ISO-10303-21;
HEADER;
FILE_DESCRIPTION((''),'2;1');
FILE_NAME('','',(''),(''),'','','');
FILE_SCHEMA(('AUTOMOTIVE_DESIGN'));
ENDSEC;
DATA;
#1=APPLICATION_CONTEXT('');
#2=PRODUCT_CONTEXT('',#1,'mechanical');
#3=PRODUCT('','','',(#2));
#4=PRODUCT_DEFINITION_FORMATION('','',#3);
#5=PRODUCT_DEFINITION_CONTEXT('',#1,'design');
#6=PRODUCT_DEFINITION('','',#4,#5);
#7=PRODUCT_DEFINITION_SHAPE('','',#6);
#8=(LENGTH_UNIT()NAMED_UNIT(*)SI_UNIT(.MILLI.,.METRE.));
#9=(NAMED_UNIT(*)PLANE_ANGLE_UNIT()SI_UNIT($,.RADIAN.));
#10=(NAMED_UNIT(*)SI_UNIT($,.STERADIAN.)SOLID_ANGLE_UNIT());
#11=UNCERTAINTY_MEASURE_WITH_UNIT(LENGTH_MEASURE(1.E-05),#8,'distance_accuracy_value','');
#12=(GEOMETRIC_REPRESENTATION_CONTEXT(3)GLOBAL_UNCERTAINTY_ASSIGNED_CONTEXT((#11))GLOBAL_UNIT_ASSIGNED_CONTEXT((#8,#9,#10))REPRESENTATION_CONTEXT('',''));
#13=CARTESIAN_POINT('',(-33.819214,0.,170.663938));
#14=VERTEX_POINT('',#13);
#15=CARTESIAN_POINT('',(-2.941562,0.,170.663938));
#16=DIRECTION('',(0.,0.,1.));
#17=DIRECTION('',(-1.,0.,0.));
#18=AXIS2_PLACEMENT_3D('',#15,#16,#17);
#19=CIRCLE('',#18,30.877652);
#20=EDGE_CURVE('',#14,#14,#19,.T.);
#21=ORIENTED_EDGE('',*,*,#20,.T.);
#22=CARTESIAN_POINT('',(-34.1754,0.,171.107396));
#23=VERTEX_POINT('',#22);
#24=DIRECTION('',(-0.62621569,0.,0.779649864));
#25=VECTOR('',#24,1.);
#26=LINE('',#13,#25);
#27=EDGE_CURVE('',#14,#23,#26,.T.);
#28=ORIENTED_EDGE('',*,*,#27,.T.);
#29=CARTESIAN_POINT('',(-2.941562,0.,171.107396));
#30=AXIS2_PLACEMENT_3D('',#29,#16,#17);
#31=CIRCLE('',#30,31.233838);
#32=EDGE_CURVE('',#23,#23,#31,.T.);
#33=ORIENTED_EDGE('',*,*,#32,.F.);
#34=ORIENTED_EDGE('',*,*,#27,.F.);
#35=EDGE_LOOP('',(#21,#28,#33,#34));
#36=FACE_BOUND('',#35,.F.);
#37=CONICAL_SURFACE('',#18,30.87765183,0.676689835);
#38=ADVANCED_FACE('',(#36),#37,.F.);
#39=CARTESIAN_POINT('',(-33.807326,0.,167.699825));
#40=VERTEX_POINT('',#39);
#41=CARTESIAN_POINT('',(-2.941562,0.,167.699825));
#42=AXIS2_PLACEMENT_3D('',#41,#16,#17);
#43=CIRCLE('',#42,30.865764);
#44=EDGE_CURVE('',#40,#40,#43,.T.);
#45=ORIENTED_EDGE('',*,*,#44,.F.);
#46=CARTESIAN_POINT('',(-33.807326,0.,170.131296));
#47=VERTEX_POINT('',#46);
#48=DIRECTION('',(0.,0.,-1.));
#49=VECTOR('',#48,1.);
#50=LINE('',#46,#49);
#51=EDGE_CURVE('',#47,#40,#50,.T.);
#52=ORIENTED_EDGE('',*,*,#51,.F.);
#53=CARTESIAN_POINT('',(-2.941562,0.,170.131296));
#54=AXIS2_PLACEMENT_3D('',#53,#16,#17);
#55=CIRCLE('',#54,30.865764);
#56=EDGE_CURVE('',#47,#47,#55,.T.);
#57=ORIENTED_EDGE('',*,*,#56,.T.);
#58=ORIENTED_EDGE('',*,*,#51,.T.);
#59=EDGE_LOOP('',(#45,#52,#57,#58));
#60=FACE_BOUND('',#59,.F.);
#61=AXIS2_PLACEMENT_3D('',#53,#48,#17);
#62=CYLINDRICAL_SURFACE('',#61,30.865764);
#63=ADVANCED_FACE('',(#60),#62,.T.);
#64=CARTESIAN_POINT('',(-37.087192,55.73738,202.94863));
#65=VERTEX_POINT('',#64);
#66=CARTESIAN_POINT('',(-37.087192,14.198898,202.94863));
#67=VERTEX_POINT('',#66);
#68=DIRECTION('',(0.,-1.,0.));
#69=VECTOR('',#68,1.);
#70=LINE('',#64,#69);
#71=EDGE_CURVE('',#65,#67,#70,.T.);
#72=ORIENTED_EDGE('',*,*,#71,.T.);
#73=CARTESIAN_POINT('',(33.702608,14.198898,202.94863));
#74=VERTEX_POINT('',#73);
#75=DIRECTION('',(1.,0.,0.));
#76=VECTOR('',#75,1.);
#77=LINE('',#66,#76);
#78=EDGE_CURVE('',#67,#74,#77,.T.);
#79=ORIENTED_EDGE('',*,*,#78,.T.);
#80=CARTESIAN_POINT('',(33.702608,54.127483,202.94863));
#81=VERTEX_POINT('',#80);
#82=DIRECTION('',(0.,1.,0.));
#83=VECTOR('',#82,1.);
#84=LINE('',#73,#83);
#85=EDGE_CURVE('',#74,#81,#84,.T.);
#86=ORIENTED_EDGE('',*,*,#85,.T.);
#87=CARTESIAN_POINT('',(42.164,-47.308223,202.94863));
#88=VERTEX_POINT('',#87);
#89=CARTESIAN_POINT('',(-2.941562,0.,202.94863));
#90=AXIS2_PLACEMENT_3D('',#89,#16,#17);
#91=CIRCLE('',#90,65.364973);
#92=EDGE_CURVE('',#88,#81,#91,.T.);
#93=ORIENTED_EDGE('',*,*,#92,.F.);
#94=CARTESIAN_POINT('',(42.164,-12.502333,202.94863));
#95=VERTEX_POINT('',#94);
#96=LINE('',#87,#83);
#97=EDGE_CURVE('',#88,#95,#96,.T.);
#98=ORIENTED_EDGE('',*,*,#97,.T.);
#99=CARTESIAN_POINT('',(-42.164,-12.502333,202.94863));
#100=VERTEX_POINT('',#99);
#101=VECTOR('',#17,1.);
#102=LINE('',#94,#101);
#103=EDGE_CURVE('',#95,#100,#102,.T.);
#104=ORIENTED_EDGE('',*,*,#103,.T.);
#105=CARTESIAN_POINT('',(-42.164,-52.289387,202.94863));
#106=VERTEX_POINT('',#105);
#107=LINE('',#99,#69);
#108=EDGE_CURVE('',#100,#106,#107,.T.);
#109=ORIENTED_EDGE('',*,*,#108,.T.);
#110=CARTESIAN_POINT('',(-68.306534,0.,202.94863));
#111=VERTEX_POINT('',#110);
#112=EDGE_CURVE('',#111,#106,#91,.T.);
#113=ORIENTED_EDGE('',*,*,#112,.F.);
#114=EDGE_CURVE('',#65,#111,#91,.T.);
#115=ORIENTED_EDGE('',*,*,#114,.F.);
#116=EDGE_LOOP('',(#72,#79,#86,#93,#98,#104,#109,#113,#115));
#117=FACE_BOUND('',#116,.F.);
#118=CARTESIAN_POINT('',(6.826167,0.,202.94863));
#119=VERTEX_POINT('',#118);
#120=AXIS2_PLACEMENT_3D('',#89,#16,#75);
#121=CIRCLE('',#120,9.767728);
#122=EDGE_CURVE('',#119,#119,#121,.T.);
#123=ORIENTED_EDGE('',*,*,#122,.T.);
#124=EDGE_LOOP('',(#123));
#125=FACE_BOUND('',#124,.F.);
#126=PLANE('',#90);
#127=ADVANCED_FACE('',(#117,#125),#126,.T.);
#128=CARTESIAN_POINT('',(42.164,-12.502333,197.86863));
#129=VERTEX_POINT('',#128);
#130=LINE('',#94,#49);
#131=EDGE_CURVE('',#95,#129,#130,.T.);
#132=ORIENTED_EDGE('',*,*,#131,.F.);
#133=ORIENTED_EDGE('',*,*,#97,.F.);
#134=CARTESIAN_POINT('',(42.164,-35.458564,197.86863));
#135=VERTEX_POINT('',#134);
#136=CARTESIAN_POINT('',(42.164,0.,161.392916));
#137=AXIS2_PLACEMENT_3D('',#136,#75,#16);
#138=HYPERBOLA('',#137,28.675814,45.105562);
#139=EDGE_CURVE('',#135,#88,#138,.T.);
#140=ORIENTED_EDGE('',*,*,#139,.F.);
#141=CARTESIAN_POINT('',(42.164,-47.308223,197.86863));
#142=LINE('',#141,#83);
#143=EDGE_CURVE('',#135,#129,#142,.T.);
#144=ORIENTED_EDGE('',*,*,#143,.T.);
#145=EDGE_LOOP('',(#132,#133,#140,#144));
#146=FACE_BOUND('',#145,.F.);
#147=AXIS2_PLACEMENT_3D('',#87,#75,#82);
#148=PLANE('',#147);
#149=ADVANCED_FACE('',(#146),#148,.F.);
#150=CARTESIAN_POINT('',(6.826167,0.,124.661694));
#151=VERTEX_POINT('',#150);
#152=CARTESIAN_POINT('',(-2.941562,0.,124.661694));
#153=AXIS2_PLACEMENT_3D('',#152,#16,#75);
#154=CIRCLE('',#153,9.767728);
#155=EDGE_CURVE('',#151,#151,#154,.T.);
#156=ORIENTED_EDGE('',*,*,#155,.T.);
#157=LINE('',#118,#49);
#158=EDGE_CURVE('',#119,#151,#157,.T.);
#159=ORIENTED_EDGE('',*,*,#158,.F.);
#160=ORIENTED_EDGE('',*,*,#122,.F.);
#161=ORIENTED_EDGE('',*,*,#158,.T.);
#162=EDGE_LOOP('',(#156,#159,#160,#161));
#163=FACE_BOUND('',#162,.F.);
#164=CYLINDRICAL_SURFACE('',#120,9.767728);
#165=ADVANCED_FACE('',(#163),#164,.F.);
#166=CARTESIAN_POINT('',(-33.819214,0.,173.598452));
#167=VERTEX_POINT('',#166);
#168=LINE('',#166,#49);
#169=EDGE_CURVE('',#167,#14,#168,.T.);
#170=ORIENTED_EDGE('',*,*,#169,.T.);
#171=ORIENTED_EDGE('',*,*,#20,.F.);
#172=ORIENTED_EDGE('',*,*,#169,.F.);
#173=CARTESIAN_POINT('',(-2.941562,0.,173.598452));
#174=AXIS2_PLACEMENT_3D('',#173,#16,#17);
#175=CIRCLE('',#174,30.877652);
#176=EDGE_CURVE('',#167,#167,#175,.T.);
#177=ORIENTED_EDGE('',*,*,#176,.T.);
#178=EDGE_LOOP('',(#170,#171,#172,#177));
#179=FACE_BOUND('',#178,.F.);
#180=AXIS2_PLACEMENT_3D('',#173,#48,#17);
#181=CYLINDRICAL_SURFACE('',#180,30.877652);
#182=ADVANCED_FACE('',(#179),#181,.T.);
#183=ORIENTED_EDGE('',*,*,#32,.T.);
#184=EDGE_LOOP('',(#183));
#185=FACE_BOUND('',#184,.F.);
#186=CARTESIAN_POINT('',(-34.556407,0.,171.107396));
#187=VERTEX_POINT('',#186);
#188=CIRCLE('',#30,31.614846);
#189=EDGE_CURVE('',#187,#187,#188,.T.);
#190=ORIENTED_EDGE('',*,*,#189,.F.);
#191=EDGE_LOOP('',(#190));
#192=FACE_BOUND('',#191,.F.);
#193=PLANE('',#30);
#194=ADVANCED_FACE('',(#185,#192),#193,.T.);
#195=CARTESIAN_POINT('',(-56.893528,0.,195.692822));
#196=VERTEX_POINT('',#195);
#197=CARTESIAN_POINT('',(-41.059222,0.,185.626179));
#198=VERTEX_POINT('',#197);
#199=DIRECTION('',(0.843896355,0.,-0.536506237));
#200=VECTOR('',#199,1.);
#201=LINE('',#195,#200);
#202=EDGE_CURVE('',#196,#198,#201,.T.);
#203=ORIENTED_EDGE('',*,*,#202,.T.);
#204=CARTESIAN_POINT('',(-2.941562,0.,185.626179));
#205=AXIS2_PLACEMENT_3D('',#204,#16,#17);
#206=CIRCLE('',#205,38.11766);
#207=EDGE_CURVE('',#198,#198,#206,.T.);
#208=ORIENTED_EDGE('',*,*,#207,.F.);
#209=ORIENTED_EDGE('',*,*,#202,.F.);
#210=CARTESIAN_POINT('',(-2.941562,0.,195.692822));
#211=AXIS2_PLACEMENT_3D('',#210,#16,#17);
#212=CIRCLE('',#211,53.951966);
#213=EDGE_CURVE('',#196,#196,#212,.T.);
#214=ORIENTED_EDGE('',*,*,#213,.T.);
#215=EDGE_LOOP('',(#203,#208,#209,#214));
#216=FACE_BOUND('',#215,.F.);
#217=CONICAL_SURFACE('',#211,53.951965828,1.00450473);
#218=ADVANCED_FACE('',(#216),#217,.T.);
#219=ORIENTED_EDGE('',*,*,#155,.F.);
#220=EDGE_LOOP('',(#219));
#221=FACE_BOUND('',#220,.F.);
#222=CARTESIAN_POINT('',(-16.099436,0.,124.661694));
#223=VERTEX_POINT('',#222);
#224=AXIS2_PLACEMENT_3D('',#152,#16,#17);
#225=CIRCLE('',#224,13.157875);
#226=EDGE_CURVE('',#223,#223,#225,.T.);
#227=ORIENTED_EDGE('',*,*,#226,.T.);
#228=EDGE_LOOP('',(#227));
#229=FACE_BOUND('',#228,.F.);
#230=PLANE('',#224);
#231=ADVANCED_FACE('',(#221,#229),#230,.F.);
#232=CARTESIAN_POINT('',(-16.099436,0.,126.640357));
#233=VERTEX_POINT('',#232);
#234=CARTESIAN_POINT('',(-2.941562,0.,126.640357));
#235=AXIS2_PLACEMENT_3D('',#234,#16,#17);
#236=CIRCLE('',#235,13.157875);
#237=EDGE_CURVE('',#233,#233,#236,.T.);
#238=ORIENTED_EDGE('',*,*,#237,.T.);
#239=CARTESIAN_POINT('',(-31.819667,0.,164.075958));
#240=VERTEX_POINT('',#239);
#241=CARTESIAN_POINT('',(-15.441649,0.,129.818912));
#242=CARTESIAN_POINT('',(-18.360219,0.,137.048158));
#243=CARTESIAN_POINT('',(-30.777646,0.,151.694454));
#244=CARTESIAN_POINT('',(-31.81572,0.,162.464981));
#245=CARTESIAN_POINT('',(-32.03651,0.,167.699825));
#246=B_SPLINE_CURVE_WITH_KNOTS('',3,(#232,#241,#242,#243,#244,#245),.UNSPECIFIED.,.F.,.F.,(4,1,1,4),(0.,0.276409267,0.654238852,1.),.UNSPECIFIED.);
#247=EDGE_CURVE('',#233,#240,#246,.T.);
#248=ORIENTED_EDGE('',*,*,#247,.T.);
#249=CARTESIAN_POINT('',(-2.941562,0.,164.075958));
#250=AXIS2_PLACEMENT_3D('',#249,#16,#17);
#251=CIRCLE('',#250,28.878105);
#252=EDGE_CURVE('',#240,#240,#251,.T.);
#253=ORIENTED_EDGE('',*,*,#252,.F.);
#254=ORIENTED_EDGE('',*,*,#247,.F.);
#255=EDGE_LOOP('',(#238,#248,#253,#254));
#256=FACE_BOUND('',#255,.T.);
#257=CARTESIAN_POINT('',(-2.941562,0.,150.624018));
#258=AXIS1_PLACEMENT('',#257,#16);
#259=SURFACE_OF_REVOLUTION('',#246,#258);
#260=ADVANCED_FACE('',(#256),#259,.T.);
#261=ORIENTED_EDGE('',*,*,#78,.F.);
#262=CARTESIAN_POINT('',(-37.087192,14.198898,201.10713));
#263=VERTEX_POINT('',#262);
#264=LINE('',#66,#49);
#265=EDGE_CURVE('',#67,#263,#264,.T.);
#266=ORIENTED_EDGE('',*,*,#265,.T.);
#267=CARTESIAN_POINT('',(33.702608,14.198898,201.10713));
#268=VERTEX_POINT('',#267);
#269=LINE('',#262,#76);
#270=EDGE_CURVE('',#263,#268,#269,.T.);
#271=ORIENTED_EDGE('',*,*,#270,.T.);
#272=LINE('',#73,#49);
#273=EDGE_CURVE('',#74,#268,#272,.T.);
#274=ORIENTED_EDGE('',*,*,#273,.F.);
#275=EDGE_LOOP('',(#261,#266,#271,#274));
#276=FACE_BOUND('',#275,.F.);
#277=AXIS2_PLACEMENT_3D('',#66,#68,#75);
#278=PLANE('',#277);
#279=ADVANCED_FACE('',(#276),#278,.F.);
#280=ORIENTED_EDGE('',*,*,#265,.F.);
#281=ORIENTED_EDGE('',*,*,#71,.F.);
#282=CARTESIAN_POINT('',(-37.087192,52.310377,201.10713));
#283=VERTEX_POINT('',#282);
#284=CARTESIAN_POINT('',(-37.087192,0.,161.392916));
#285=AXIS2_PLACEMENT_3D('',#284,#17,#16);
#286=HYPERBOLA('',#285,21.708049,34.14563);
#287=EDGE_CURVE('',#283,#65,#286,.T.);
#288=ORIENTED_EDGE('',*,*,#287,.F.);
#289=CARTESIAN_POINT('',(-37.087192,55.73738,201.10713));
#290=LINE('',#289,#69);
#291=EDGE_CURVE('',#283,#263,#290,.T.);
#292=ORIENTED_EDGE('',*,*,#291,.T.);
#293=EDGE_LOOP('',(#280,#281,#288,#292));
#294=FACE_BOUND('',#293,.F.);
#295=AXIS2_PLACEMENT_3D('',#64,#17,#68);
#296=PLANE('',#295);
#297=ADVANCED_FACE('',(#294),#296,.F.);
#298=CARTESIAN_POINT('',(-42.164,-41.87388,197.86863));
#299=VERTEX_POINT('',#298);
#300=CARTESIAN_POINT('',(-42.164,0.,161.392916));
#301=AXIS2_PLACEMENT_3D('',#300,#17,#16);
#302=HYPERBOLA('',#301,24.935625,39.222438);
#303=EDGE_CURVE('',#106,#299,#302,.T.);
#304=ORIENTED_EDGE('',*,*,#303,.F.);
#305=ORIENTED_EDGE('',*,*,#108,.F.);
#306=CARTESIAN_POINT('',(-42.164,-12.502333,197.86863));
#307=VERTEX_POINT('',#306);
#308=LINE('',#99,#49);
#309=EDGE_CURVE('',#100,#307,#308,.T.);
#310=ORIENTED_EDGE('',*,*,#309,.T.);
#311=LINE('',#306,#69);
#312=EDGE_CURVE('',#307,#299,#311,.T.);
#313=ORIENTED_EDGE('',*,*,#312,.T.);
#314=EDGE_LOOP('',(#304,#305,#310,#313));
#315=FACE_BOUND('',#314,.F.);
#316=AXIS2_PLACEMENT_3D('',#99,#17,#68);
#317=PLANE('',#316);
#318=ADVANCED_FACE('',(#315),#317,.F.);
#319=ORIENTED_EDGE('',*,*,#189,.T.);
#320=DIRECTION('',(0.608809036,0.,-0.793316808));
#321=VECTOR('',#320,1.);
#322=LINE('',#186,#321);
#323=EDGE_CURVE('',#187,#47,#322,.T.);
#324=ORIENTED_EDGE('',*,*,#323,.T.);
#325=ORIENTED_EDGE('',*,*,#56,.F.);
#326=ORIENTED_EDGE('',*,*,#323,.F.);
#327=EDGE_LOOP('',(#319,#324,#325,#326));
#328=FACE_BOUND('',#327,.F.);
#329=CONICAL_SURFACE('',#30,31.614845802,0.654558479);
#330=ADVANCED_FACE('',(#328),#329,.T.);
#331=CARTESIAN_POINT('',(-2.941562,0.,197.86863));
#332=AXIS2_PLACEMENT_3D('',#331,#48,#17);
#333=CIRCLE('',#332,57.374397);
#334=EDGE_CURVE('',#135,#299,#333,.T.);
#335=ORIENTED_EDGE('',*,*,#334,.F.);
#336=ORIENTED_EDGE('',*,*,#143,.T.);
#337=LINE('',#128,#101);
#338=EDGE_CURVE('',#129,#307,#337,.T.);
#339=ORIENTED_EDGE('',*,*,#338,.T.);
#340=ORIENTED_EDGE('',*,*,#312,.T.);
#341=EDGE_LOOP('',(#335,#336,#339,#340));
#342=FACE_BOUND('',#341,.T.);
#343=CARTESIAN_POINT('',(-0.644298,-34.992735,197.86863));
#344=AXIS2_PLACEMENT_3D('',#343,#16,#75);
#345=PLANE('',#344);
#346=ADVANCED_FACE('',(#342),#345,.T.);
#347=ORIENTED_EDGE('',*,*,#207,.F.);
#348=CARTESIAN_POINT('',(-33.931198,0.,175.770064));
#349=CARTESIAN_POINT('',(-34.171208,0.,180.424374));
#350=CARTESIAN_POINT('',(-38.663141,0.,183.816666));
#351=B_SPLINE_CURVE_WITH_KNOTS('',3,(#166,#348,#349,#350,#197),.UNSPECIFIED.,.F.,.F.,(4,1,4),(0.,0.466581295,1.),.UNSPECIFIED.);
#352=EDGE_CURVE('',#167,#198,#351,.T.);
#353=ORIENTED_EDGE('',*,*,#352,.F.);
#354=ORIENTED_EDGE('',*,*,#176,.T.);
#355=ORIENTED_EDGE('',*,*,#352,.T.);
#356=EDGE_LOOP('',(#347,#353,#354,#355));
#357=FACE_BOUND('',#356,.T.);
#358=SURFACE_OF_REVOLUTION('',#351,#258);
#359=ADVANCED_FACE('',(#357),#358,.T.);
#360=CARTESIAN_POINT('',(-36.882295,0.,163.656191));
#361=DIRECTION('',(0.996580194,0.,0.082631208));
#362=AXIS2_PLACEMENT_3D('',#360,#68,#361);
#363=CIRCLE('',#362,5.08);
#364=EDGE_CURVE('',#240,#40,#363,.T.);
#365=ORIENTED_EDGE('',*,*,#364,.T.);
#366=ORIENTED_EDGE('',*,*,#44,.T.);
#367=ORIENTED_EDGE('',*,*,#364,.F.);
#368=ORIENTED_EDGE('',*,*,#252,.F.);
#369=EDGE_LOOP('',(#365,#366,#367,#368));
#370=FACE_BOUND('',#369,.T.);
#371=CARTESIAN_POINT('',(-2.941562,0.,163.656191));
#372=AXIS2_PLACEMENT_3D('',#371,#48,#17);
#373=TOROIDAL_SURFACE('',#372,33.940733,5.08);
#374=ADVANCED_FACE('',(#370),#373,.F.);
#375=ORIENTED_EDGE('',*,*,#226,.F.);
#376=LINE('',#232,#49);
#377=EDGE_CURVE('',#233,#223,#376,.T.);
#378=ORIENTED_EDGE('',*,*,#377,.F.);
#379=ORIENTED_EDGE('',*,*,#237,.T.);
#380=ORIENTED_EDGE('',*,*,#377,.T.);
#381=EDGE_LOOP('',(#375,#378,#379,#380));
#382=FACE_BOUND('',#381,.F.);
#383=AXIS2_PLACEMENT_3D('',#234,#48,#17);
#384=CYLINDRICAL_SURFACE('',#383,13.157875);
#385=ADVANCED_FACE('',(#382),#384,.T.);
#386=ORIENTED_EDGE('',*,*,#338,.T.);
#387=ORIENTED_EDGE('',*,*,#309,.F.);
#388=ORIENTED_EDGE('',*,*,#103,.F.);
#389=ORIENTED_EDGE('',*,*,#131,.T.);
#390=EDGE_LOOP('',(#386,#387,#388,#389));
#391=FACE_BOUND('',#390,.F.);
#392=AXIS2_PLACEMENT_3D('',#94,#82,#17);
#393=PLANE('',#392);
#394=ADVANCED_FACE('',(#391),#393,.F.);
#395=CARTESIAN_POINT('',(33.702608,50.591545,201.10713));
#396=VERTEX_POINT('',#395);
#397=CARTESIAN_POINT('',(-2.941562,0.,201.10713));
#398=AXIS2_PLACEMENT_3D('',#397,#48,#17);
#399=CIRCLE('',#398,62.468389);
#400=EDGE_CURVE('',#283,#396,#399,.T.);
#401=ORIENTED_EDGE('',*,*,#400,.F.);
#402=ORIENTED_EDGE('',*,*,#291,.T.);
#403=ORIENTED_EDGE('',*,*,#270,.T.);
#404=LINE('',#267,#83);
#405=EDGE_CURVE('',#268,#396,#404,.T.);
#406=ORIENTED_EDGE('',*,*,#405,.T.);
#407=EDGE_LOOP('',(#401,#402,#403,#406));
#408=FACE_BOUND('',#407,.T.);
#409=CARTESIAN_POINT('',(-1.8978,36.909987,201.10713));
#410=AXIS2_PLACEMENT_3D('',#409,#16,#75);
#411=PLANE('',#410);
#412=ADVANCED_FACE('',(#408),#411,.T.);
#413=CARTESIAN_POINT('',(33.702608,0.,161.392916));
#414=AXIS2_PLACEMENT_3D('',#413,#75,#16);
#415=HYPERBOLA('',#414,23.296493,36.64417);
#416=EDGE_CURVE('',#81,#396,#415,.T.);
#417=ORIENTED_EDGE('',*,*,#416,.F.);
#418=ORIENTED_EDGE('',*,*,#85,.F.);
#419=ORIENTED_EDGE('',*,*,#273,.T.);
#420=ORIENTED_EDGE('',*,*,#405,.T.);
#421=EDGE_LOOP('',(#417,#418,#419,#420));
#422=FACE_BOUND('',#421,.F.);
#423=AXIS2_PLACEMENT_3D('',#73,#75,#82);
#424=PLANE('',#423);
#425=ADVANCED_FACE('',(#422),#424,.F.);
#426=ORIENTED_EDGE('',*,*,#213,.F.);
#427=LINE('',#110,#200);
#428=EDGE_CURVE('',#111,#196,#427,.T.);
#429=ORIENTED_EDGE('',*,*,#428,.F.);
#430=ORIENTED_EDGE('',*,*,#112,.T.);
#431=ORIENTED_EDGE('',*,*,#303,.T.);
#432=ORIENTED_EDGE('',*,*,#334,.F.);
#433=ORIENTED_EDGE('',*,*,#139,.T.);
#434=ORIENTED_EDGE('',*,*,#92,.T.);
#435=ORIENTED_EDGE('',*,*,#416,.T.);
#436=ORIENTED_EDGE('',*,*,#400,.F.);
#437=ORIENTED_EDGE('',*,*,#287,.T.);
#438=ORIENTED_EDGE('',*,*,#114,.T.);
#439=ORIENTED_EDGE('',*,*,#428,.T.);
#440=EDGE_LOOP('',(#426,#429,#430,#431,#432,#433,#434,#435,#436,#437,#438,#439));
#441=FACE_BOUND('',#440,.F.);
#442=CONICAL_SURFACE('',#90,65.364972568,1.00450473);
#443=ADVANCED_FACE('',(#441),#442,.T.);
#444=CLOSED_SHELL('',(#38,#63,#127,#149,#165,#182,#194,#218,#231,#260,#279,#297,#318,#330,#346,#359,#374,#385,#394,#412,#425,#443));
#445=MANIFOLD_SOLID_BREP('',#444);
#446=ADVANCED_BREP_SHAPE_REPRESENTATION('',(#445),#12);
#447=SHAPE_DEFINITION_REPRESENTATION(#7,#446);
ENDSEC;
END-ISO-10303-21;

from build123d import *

# Parameters (mm, degrees)
F3_R     = 9.7677281956
F3_R_2   = 7.6796646
F4_DEPTH = 86.2554833293
F5_DEPTH = 1.8415
F6_DEPTH = 5.08


# Not quite as in the source:
# - a fillet or chamfer that OpenCascade refuses, or shapes differently, is made with other operations: its cross-section is extruded or revolved along the edge and cut away or added


with BuildPart() as f1:
    # F0 (on Front) → F1 (revolve)
    with BuildSketch(Plane.XZ):
        with BuildLine():
            add(Edge.make_bspline(
                [(-16.0994362086, 126.6403571513), (-15.4416487906, 129.818912005), (-18.3602187314, 137.0481581434), (-30.7776463133, 151.6944538615), (-31.8157197837, 162.4649808678), (-32.0365097363, 167.6998246302)],
                knots=[0, 0, 0, 0, 0.2764092674, 0.6542388522, 1, 1, 1, 1], degree=3))
            Line((-16.0994362086, 126.6403571513), (-16.0994362086, 124.6616938849))
            Line((-16.0994362086, 124.6616938849), (-10.6212262798, 124.6616938849))
            Line((-10.6212262798, 124.6616938849), (-10.6212262798, 126.6403571513))
            Line((-10.6212262798, 126.6403571513), (-10.6212262798, 167.9538246302))
            Line((-10.6212262798, 167.9538246302), (-10.6212262798, 173.5984517965))
            Line((-10.6212262798, 173.5984517965), (-10.6212262798, 192.7077323198))
            Line((-10.6212262798, 192.7077323198), (-10.6212262798, 202.9486296068))
            Line((-10.6212262798, 202.9486296068), (-68.306534248, 202.9486296068))
            Line((-68.306534248, 202.9486296068), (-56.8935275078, 195.6928223372))
            Line((-56.8935275078, 195.6928223372), (-41.0592220724, 185.6261789799))
            add(Edge.make_bspline(
                [(-33.8192135096, 173.5984517965), (-33.9311976843, 175.7700643461), (-34.1712077818, 180.4243736831), (-38.663140823, 183.8166663782), (-41.0592220724, 185.6261789799)],
                knots=[0, 0, 0, 0, 0.4665812951, 1, 1, 1, 1], degree=3))
            Line((-33.8192135096, 173.5984517965), (-33.8192135096, 170.823040801))
            Line((-33.8192135096, 170.823040801), (-33.8192135096, 170.6639382431))
            Line((-33.8192135096, 170.6639382431), (-34.1753996909, 171.1073964834))
            Line((-34.1753996909, 171.1073964834), (-34.47479508, 171.1073964834))
            Line((-34.47479508, 171.1073964834), (-34.5564074814, 171.1073964834))
            Line((-34.5564074814, 171.1073964834), (-33.8073261082, 170.1312959194))
            Line((-33.8073261082, 170.1312959194), (-33.8073261082, 167.6998246302))
            Line((-33.8073261082, 167.6998246302), (-32.0365097363, 167.6998246302))
        make_face()
    revolve(axis=Axis((-2.9415616798, 0, 150.6240181996), (0, 0, 1)))

    # F2: fillet of radius 5.08 on 1 edges, made by hand

    # F2_s1 → F2_t2 (revolve)
    with BuildSketch(Plane.XZ):
        with BuildLine():
            ThreePointArc((-31.8196671786, 164.0759580259), (-32.4282830228, 166.0991776077), (-33.8073261082, 167.6998246302))
            Line((-33.8073261082, 167.6998246302), (-33.7458267391, 167.780697293))
            ThreePointArc((-33.7458267391, 167.780697293), (-32.9219179223, 167.8014246302), (-32.0365097363, 167.8014246302))
            Line((-32.0365097363, 167.8014246302), (-31.934999984, 167.704106006))
            ThreePointArc((-31.934999984, 167.704106006), (-31.8450405903, 165.8927492145), (-31.7184146309, 164.0843533567))
            Line((-31.7184146309, 164.0843533567), (-31.8196671786, 164.0759580259))
        make_face()
    revolve(axis=Axis((-2.9415616798, 0, 167.6998246302), (0, 0, 1)))

    # F3 (on face) → F4 (cut)
    with BuildSketch(Plane.XY.offset(202.9486296068)):
        with Locations((-2.9415616798, 0)):
            Circle(F3_R)
        with Locations((-2.9415616798, 0)):
            Circle(F3_R_2, mode=Mode.SUBTRACT)
    extrude(amount=-F4_DEPTH, mode=Mode.SUBTRACT)

    # F3 (on face) → F5 (cut)
    with BuildSketch(Plane.XY.offset(202.9486296068)):
        with BuildLine():
            Line((-37.0871919824, 14.1988984612), (33.7026080176, 14.1988984612))
            Line((33.7026080176, 14.1988984612), (33.7026080176, 54.127483463))
            ThreePointArc((33.7026080176, 54.127483463), (-1.4554201029, 65.3480758864), (-37.0871919824, 55.7373803661))
            Line((-37.0871919824, 55.7373803661), (-37.0871919824, 14.1988984612))
        make_face()
    extrude(amount=-F5_DEPTH, mode=Mode.SUBTRACT)

    # F3 (on face) → F6 (cut)
    with BuildSketch(Plane.XY.offset(202.9486296068)):
        with BuildLine():
            Line((-42.164, -12.5023329654), (-42.164, -52.2893867918))
            ThreePointArc((-42.164, -52.2893867918), (0.9127584674, -65.2512364254), (42.164, -47.3082227989))
            Line((42.164, -47.3082227989), (42.164, -12.5023329654))
            Line((42.164, -12.5023329654), (-42.164, -12.5023329654))
        make_face()
    extrude(amount=-F6_DEPTH, mode=Mode.SUBTRACT)


solid = f1.part
